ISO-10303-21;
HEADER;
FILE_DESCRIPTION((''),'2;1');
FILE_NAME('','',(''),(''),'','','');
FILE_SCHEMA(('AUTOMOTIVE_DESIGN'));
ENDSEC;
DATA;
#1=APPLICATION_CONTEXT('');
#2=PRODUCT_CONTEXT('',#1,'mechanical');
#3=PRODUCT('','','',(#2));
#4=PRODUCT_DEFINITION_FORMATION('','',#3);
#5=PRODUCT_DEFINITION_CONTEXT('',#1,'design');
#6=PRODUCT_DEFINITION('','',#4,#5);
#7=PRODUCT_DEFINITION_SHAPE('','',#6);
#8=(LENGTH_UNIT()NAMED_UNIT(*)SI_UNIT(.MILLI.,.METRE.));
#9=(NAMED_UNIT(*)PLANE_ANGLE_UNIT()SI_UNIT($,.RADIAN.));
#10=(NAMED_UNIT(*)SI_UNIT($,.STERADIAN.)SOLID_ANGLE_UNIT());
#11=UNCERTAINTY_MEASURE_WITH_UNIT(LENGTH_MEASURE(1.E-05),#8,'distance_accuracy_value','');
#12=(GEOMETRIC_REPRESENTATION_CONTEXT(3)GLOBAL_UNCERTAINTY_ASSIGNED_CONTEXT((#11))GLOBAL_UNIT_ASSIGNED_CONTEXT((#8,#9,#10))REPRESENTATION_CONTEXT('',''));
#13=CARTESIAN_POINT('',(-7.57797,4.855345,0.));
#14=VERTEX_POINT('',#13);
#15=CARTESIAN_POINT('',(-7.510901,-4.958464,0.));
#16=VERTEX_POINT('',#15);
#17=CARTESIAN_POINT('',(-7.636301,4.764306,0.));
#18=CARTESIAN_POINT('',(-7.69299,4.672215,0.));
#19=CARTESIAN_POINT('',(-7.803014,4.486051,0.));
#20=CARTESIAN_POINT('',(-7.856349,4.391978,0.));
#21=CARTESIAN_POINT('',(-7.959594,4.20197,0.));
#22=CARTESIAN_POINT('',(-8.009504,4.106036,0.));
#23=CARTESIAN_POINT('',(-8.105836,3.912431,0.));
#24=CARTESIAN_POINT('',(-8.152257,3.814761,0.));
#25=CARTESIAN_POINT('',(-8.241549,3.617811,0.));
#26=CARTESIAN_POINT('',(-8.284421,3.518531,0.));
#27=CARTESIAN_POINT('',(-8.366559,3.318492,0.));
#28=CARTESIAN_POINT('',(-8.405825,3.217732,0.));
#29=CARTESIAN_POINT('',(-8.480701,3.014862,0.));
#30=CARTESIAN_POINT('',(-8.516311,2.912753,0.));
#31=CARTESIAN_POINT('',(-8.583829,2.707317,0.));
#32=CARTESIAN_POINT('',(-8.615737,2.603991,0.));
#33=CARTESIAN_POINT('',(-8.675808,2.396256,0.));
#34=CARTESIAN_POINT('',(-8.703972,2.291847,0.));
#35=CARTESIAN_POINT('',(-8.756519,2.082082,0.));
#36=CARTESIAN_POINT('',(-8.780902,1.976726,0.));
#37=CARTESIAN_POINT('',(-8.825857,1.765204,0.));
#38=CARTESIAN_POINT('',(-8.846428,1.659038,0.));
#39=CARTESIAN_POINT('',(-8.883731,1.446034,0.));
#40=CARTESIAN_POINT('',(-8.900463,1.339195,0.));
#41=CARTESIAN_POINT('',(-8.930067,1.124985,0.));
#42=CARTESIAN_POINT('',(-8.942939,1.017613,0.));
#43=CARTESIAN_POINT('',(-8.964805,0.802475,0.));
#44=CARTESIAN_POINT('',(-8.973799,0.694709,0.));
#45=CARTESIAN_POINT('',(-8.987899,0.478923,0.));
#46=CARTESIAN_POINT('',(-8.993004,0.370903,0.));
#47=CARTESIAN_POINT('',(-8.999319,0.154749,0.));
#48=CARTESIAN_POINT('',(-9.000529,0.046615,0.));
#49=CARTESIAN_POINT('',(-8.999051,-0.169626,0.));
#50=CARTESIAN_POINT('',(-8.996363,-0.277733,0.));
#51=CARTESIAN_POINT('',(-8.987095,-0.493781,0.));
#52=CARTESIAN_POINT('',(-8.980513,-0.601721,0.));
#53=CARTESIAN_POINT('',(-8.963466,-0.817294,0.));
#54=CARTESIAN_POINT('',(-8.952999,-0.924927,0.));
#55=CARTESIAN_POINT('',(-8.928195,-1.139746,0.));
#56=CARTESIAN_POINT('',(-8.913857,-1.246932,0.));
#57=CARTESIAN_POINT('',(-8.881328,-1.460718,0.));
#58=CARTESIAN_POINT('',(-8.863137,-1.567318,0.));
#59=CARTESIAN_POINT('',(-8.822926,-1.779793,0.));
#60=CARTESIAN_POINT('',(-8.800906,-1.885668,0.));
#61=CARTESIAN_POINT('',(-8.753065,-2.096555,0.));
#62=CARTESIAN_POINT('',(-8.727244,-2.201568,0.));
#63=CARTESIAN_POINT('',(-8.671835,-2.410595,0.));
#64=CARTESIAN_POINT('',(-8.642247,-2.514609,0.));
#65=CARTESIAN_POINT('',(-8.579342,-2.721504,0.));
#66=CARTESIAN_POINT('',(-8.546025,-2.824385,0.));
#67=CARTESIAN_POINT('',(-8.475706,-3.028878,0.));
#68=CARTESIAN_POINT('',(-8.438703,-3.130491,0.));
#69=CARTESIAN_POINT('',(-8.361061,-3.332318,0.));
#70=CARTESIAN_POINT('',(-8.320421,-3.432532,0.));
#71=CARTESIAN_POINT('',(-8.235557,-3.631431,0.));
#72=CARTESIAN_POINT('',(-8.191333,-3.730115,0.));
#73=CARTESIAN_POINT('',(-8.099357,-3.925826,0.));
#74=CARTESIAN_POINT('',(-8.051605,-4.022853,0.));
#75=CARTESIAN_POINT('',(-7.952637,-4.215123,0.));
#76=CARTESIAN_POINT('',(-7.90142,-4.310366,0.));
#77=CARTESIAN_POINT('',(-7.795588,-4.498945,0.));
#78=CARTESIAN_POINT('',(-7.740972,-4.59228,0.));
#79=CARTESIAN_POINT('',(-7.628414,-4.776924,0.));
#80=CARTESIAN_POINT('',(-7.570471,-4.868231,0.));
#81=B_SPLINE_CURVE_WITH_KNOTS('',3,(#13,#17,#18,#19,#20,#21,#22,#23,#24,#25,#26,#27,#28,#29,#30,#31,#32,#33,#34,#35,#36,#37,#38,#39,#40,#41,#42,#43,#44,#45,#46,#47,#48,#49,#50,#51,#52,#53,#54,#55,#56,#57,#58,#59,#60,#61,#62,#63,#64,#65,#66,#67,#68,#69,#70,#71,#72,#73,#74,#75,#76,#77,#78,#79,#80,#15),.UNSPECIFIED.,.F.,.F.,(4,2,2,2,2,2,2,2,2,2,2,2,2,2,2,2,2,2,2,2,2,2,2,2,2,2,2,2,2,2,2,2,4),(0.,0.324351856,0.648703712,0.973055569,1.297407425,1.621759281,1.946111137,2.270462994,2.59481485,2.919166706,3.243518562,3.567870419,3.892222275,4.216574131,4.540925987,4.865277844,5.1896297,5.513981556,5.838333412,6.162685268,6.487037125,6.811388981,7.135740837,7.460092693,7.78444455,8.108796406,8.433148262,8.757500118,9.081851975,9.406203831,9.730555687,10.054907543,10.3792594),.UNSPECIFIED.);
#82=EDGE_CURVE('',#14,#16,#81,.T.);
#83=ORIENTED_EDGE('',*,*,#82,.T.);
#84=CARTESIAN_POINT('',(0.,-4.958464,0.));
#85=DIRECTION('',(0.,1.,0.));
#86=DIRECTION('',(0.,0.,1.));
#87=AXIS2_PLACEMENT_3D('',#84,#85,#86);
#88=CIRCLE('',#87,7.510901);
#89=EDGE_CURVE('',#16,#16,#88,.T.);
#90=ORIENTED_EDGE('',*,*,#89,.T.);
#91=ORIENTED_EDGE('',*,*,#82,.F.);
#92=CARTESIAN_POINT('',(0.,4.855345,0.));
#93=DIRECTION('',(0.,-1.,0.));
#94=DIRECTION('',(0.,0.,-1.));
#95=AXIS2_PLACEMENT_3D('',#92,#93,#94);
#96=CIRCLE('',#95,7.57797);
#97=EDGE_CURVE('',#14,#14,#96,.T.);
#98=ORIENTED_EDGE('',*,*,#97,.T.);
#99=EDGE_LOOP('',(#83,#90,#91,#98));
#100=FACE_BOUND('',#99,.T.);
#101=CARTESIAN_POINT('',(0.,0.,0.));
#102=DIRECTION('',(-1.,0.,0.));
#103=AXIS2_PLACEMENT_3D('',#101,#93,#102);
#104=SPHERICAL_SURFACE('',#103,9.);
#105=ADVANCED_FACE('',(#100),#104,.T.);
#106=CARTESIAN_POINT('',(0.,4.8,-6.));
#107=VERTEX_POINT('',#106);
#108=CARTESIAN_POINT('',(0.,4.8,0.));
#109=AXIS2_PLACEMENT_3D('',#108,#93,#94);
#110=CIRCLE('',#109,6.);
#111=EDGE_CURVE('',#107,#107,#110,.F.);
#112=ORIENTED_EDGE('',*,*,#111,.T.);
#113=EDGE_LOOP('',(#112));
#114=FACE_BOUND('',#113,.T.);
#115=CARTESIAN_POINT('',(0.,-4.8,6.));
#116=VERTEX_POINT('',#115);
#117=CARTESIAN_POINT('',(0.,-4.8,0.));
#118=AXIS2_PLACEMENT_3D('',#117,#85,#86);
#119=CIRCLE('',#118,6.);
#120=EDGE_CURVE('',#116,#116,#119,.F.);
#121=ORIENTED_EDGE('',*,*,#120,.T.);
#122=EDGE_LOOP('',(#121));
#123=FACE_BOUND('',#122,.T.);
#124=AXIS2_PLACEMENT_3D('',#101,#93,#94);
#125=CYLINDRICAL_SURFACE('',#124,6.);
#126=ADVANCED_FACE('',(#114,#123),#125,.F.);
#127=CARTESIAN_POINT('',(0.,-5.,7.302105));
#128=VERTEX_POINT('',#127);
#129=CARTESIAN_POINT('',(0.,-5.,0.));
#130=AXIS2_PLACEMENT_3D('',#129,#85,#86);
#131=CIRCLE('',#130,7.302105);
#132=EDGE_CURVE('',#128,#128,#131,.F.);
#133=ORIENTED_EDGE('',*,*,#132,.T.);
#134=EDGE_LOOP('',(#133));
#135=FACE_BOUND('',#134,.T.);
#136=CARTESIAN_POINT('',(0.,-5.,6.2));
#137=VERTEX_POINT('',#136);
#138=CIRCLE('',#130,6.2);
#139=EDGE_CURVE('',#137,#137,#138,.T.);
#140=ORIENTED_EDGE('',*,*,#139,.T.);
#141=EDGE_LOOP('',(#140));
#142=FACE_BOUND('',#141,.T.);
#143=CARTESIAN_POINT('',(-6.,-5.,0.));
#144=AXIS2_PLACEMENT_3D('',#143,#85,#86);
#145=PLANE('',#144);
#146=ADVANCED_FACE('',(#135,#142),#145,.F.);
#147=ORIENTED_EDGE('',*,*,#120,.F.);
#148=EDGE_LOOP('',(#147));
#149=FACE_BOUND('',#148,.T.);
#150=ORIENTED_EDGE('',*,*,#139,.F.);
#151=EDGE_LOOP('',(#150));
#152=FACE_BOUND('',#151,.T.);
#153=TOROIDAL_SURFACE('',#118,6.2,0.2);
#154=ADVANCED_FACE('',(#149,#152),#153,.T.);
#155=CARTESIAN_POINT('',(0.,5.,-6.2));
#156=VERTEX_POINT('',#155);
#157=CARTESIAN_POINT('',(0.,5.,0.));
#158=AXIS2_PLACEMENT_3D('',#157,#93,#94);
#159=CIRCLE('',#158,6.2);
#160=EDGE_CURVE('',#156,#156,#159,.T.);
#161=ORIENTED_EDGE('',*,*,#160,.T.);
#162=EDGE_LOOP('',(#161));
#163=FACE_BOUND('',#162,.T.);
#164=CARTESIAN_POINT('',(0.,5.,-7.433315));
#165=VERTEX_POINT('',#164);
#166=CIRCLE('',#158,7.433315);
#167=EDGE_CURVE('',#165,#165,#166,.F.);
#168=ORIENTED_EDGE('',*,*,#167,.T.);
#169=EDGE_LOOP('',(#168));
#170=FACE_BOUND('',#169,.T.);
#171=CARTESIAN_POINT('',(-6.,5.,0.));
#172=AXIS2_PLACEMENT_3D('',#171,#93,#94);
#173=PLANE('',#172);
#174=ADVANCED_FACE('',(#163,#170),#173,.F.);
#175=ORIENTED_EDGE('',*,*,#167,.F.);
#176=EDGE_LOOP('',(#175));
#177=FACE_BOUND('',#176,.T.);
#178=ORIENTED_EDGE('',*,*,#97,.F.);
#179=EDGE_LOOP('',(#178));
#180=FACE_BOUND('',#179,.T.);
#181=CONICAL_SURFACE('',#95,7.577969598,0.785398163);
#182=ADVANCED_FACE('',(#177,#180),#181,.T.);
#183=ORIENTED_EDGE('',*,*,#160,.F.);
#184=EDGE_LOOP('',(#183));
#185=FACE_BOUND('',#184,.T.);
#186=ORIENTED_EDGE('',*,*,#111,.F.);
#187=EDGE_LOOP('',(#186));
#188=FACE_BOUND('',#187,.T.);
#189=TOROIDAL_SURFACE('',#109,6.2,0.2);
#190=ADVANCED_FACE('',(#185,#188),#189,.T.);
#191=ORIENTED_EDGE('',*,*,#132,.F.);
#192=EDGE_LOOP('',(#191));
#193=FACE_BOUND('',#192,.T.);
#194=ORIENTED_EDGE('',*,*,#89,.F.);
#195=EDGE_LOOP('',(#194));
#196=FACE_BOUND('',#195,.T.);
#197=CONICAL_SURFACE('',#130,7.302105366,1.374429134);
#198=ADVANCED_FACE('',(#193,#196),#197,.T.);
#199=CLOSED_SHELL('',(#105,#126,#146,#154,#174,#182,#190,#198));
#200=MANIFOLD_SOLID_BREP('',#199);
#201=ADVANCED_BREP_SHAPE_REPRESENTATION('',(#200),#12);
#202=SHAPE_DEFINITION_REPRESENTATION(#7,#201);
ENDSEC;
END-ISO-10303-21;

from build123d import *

# Parameters (mm, degrees)
FILLET1_R       = 0.2
CHAMFER1_SIZE   = 0.181209408
CHAMFER1_SIZE_2 = 0.05


with BuildPart() as part:
    # Sketch1 → Revolve1 (revolve)
    with BuildSketch(Plane.XY):
        with BuildLine():
            Line((-6, -5), (-6, 5))
            Line((-6, 5), (-7.483314774, 5))
            ThreePointArc((-7.483314774, 5), (-9, 0), (-7.483314774, -5))
            Line((-7.483314774, -5), (-6, -5))
        make_face()
    revolve(axis=Axis((0, 0, 0), (0, 1, 0)))

    # Fillet1
    fillet1_edges = [part.edges().sort_by_distance(p)[0] for p in [
        (6, 5, 0),
        (6, -5, 0),
    ]]
    fillet(fillet1_edges, radius=FILLET1_R)

    # Chamfer1
    # the kernel refuses this chamfer: 0.181209408, 0.05 mm, written as the material it takes off along each edge
    with BuildSketch(Plane(origin=(0, -5, 0), x_dir=(-1, 0, 0), z_dir=(0, 0, -1))) as chamfer1_piece_1:
        with BuildLine():
            Line((7.483314774 - CHAMFER1_SIZE, 0), (7.510900969, 0.041535859))
            ThreePointArc((7.510900969, 0.041535859), (7.49854981, 0.022877263), (7.483314774, 0))
            Line((7.483314774, 0), (7.483314774 - CHAMFER1_SIZE, 0))
        make_face()
    revolve(axis=Axis((0, -5, 0), (0, 1, 0)), mode=Mode.SUBTRACT)
    with BuildSketch(Plane(origin=(0, 5, 0), x_dir=(-1, 0, 0), z_dir=(0, 0, -1))) as chamfer1_piece_2:
        with BuildLine():
            Line((7.577969598, -0.144654824), (7.483314774 - CHAMFER1_SIZE_2, 0))
            Line((7.483314774 - CHAMFER1_SIZE_2, 0), (7.483314774, 0))
            ThreePointArc((7.483314774, 0), (7.532931313, -0.075068951), (7.577969598, -0.144654824))
        make_face()
    revolve(axis=Axis((0, 5, 0), (0, 1, 0)), mode=Mode.SUBTRACT)


solid = part.part
